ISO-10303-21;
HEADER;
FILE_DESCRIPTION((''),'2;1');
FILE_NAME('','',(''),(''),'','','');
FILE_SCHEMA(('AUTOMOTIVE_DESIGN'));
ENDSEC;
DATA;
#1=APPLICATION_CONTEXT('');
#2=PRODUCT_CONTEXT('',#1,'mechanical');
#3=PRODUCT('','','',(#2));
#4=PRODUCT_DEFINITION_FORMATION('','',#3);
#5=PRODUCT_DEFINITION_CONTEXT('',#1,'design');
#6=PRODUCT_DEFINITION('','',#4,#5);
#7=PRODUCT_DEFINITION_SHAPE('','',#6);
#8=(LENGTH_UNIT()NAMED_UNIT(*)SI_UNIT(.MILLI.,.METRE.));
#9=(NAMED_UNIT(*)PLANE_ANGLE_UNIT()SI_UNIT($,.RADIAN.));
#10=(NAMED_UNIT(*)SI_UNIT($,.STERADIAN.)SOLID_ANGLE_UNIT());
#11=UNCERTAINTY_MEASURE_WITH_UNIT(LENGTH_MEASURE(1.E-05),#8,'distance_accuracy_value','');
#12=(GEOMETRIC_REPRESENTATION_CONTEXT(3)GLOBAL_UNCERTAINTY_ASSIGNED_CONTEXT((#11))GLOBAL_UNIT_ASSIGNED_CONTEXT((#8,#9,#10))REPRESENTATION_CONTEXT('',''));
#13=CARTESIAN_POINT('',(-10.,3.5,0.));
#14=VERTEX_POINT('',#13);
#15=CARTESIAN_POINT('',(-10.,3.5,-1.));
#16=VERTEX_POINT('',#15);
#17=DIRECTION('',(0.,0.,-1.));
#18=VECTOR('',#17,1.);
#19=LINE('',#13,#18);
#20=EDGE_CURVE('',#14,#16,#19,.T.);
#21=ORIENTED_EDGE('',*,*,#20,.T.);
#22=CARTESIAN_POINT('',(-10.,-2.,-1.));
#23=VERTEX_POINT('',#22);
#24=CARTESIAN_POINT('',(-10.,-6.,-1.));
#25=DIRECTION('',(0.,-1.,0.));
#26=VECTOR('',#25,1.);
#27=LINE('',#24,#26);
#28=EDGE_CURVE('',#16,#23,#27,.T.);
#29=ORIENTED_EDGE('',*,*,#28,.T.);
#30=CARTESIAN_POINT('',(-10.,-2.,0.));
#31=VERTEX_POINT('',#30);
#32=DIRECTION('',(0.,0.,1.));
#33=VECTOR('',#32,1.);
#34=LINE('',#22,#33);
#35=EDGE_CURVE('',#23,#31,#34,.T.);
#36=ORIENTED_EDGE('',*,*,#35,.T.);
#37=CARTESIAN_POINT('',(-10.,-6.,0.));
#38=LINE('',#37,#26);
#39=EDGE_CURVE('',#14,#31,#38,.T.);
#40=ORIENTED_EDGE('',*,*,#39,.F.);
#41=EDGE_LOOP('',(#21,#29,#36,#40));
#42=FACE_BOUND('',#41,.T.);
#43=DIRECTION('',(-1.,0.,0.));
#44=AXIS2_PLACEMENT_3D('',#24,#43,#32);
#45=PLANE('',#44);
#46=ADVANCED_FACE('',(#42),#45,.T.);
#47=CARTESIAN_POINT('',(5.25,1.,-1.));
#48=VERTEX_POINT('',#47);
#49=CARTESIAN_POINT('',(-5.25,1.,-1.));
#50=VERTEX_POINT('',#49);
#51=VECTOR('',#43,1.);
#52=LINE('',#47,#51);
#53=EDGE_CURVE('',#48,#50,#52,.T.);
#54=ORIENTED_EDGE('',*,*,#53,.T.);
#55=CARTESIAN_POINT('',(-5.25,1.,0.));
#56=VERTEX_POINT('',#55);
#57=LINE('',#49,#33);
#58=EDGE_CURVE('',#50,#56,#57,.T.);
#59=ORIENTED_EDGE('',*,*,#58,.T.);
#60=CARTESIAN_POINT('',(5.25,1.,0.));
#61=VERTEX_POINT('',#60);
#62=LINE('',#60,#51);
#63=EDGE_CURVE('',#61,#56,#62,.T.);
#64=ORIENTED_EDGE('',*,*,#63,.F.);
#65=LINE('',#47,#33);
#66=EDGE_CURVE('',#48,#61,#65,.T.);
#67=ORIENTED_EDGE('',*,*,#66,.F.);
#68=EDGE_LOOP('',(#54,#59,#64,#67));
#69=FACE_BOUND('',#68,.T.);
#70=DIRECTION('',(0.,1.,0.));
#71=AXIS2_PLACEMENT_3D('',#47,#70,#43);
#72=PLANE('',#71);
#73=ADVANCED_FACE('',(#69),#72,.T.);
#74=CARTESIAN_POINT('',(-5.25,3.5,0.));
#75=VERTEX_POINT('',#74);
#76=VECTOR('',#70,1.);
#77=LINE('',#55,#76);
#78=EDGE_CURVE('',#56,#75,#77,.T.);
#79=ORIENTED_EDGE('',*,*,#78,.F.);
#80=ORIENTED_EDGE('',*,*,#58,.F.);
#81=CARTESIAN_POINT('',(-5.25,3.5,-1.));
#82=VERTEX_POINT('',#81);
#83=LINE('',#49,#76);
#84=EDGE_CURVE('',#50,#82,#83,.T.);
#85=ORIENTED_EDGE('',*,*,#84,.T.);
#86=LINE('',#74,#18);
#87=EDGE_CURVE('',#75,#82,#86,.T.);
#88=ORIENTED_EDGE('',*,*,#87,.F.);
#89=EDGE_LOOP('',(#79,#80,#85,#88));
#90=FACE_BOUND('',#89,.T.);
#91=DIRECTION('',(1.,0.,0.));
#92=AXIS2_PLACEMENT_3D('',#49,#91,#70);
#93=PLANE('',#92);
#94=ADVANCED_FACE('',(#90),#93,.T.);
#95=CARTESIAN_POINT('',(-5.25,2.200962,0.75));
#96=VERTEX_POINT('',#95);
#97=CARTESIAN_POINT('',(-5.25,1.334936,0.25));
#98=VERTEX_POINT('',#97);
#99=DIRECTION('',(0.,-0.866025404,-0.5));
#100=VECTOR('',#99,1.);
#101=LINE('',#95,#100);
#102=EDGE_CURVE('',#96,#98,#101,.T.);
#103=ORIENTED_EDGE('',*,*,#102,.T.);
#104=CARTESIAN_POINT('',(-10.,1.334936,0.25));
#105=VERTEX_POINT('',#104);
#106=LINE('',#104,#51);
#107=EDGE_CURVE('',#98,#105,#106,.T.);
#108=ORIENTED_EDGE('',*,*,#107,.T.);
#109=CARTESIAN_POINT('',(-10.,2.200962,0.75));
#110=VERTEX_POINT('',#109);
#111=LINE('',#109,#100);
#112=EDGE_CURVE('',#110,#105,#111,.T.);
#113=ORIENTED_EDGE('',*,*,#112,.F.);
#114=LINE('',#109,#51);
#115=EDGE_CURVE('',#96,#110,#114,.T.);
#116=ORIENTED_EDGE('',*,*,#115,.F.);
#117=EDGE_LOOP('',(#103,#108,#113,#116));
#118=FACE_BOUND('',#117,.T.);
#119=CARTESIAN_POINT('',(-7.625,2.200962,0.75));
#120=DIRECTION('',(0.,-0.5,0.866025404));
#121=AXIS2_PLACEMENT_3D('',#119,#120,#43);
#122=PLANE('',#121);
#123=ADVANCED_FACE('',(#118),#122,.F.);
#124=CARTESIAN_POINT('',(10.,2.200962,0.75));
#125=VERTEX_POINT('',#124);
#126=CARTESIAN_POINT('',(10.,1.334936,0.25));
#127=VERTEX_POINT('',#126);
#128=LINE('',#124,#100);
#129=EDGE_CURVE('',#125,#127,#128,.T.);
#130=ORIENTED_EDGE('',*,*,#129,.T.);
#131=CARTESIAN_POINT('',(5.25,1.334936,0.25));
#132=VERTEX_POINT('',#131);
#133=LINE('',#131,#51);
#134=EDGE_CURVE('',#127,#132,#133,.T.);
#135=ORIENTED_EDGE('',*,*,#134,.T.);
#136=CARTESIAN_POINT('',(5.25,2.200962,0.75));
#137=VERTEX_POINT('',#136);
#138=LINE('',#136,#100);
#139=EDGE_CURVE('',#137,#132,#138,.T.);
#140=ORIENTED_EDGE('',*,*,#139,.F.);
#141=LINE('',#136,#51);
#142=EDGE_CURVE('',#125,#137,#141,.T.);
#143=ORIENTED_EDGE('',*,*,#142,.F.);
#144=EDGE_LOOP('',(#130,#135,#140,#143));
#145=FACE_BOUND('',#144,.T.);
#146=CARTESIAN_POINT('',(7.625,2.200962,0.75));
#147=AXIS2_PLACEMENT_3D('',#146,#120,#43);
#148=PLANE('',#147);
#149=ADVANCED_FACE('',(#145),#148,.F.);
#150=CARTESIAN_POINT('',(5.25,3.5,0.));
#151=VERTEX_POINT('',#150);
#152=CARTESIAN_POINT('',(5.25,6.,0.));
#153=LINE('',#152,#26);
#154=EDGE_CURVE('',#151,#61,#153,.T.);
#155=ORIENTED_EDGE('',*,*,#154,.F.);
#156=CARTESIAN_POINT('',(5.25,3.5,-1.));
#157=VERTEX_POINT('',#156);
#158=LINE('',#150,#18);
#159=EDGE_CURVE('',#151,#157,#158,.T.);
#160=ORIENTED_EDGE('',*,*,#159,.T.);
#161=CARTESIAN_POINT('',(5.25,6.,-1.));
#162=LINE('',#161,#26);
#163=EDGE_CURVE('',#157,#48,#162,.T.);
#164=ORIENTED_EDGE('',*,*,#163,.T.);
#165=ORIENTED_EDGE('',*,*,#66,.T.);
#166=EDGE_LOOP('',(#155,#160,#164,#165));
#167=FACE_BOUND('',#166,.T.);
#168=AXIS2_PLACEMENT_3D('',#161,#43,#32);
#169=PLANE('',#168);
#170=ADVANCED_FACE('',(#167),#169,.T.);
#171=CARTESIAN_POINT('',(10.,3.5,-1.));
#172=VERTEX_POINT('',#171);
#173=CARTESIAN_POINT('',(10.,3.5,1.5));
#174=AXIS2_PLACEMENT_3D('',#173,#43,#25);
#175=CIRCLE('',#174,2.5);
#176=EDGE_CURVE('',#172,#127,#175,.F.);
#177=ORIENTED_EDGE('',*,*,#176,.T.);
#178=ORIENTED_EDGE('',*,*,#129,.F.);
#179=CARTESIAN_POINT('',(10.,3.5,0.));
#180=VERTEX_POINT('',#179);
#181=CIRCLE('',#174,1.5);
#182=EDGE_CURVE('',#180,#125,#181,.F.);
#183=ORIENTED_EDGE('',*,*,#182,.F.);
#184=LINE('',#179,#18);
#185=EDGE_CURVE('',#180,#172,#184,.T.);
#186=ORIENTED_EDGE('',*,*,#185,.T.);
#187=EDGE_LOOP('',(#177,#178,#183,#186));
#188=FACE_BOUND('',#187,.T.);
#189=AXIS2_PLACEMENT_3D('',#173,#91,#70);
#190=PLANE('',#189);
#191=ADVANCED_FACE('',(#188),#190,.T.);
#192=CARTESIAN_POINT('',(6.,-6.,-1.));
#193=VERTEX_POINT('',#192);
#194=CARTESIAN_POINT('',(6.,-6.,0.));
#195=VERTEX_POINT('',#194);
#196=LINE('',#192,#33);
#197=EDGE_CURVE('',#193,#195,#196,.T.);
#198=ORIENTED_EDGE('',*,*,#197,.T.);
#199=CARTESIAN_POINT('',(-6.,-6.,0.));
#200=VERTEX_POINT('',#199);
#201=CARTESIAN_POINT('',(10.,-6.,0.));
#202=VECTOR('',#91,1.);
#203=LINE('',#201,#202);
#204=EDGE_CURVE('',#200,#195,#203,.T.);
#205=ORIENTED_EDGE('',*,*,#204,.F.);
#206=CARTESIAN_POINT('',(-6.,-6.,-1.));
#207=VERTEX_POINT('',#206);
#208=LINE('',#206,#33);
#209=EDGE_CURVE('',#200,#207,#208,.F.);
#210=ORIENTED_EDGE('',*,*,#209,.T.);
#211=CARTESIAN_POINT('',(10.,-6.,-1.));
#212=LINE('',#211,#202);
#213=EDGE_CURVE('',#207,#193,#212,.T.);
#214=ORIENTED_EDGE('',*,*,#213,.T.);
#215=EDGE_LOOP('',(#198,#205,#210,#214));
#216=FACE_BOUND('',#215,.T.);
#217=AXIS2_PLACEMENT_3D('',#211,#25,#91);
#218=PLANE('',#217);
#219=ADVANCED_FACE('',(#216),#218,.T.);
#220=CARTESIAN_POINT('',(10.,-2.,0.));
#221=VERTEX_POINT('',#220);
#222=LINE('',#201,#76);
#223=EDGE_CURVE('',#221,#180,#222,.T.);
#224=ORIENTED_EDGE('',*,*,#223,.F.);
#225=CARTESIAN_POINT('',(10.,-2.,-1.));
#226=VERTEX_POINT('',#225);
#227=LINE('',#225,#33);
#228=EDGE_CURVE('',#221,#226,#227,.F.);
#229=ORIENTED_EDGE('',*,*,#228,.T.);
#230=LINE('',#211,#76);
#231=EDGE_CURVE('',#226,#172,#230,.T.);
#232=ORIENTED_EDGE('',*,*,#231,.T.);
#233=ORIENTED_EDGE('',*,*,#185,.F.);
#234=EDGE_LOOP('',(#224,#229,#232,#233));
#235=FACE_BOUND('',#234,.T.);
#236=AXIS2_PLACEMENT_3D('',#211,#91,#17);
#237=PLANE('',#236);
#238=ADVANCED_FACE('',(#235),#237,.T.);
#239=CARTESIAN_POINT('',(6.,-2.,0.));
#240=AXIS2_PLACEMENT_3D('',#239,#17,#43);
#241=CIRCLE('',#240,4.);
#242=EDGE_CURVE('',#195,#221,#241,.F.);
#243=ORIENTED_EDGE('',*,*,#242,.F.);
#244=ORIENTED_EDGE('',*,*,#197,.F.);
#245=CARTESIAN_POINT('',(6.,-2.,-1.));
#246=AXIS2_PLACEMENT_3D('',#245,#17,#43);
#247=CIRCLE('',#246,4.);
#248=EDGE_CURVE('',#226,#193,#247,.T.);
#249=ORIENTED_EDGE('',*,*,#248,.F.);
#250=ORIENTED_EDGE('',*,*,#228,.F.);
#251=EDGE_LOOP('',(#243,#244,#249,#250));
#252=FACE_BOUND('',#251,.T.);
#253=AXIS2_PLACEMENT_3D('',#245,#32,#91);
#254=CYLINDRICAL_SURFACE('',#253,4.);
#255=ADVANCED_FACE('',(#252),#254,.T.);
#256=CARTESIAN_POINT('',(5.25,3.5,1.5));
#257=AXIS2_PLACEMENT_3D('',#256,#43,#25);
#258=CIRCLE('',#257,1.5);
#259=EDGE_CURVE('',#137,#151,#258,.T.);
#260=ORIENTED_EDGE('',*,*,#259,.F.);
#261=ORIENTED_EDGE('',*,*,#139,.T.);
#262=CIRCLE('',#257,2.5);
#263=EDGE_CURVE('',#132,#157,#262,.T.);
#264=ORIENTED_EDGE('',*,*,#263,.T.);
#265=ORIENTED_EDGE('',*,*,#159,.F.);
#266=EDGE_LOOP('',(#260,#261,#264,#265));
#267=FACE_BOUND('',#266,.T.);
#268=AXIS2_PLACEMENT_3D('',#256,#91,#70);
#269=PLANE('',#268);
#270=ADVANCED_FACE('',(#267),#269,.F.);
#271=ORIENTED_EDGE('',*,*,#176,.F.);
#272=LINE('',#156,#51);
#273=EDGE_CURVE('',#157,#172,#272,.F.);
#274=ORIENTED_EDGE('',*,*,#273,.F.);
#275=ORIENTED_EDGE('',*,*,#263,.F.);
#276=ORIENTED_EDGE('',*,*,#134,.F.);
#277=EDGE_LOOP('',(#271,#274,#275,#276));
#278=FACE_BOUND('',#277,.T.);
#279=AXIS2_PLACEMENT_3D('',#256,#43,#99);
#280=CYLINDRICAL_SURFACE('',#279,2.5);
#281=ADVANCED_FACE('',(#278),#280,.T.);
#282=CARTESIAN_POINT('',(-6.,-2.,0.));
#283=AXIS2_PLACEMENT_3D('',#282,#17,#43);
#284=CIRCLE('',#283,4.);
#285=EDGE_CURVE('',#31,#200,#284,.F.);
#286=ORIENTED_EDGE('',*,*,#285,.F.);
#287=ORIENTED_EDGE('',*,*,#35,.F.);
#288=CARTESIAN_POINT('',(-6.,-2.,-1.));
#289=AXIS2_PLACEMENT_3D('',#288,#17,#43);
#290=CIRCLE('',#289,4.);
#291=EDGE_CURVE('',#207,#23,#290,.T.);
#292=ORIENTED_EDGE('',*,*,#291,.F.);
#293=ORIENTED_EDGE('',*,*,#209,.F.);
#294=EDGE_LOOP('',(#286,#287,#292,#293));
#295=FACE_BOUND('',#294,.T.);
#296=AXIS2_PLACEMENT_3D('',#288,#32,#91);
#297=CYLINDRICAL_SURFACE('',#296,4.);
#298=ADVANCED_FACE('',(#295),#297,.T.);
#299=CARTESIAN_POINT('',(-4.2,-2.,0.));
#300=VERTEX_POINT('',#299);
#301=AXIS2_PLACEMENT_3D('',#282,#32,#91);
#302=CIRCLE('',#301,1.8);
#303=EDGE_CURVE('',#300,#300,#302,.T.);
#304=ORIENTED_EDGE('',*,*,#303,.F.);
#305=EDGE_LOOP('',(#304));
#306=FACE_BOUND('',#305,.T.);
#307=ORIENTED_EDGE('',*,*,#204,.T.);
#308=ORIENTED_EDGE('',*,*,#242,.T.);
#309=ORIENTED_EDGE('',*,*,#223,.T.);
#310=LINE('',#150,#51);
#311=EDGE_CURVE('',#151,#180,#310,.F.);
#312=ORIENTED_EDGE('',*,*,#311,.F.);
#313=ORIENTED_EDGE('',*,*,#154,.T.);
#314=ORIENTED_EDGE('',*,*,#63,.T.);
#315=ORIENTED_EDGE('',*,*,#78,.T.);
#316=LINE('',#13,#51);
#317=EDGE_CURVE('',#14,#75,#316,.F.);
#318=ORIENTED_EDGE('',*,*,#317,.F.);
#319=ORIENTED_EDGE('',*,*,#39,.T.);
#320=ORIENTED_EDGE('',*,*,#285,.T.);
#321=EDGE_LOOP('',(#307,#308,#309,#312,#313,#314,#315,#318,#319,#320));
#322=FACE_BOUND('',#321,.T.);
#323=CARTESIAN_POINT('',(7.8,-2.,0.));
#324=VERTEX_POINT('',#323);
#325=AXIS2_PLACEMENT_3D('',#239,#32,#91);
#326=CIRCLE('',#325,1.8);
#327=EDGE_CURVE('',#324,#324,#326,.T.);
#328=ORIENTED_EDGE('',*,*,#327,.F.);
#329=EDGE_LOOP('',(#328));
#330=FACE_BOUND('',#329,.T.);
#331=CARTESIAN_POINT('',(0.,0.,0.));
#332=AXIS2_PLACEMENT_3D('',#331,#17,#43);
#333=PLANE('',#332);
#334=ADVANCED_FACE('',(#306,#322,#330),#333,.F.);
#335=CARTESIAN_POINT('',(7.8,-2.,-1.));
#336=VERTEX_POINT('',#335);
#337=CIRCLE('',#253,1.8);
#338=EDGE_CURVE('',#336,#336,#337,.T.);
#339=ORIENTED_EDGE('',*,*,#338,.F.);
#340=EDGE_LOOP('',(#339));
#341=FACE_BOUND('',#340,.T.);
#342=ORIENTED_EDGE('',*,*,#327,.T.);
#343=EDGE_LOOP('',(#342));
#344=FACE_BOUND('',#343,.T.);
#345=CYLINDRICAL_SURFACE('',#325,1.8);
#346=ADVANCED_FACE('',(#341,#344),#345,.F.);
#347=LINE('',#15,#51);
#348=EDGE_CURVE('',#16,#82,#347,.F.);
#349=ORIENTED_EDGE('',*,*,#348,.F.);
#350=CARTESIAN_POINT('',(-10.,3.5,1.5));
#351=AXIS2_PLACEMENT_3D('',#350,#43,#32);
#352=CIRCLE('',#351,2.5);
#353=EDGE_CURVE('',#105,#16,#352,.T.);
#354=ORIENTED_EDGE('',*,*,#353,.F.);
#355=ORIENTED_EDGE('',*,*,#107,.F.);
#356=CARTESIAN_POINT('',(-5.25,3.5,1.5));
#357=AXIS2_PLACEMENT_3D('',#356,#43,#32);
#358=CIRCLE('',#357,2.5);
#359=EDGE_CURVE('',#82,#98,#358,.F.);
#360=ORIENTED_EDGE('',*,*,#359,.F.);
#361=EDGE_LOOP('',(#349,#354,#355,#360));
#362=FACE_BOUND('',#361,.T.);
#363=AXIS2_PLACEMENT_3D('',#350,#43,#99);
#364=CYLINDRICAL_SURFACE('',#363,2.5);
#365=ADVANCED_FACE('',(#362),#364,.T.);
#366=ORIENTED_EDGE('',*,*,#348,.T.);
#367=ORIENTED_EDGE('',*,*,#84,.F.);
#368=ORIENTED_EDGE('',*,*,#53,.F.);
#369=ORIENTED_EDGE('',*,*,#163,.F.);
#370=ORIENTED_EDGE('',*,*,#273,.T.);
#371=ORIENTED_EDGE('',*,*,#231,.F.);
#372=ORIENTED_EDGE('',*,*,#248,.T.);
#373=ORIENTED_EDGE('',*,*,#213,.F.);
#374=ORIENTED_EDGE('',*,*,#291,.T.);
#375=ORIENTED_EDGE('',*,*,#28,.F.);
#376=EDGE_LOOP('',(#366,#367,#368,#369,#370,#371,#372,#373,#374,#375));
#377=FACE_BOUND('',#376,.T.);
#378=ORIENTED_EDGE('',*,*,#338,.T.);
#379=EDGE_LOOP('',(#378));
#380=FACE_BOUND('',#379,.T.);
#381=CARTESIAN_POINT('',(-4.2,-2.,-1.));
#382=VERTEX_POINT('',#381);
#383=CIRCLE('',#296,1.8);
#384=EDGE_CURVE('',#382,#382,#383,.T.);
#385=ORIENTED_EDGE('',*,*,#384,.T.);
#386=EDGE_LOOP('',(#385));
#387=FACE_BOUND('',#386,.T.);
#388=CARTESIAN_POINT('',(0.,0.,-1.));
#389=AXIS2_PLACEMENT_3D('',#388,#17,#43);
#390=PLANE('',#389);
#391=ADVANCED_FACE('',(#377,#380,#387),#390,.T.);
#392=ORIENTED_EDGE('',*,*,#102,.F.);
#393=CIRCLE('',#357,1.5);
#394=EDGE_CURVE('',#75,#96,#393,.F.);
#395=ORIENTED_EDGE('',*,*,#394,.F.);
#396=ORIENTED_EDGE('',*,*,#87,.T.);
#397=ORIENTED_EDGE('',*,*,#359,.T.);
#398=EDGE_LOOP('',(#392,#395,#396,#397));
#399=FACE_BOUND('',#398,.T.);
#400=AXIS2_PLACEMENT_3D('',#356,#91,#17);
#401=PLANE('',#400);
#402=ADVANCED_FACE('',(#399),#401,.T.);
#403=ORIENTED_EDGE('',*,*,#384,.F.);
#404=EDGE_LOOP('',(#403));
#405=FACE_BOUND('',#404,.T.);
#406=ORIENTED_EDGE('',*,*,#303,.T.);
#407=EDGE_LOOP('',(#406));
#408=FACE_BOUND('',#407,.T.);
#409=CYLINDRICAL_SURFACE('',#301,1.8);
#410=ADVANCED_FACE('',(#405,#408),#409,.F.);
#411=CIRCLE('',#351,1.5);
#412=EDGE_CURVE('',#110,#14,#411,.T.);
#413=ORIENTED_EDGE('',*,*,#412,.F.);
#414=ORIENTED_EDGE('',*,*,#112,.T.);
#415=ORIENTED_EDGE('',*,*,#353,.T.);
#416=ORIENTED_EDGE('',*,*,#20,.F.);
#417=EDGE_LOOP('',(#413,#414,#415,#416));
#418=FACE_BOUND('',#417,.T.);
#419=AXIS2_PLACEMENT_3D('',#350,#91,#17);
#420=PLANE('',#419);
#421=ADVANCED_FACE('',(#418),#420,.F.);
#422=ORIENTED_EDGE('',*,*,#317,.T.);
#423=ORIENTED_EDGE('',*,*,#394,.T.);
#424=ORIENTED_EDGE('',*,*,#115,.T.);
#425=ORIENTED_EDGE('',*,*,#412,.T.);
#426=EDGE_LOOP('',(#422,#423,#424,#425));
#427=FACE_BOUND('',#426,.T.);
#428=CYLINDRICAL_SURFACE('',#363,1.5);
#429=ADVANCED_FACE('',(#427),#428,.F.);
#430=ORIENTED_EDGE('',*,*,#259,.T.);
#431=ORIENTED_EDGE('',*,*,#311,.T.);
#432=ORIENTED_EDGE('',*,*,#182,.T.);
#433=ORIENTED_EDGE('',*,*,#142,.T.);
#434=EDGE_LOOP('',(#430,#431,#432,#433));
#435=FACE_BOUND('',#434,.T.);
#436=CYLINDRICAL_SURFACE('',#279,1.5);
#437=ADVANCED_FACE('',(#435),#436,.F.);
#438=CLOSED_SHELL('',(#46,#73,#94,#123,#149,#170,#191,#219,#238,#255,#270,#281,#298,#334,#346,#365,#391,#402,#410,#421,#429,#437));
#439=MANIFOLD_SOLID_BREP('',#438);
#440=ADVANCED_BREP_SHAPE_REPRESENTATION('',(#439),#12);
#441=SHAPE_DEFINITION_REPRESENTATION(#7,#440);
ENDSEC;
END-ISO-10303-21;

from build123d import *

# Parameters (mm, degrees)
SM_BASE_FLANGE_1_DEPTH = 1
OTHER_START            = -10
OTHER_1_DEPTH          = 20
OTHER_1_2_DEPTH        = 4.75
OTHER_START_2          = 5.25
OTHER_1_3_DEPTH        = 4.75
FILLET_1_R             = 4
HOLE_WIZARD_M31_D      = 3.6


# Read off the part's stored shape, not the designer's step: Каемка1
# Sheet-metal steps are written as plain solids
with BuildPart() as part:
    # Sketch 1 → Базовая кромка1 (new body)
    with BuildSketch(Plane.XY):
        Polygon((5.25, 6), (5.25, 1), (-5.25, 1), (-5.25, 6), (-10, 6), (-10, -6), (10, -6), (10, 6), align=None)
    extrude(amount=-SM_BASE_FLANGE_1_DEPTH)

    # Other 1 outline → Other 1 (cut)
    with BuildSketch(Plane.YZ.offset(OTHER_START)):
        with BuildLine():
            Line((6, 0), (5.5, 0))
            ThreePointArc((5.5, 0), (4.618033989, -0.736067978), (3.5, -1))
            Line((3.5, -1), (6, -1))
            Line((6, -1), (6, 0))
        make_face()
    extrude(amount=OTHER_1_DEPTH, mode=Mode.SUBTRACT)

    # Other 1 2 outline → Other 1 2 (add)
    with BuildSketch(Plane.YZ.offset(OTHER_START)):
        with BuildLine():
            Line((1.334936491, 0.25), (2.200961894, 0.75))
            ThreePointArc((2.200961894, 0.75), (4.25, 2.799038106), (3.5, 0))
            Line((3.5, 0), (5.5, 0))
            ThreePointArc((5.5, 0), (3.649788152, 3.995508667), (1.334936491, 0.25))
        make_face()
    extrude(amount=OTHER_1_2_DEPTH)

    # Other 1 3 outline → Other 1 3 (add)
    with BuildSketch(Plane.YZ.offset(OTHER_START_2)):
        with BuildLine():
            Line((1.334936491, 0.25), (2.200961894, 0.75))
            ThreePointArc((2.200961894, 0.75), (4.25, 2.799038106), (3.5, 0))
            Line((3.5, 0), (5.5, 0))
            ThreePointArc((5.5, 0), (3.649788152, 3.995508667), (1.334936491, 0.25))
        make_face()
    extrude(amount=OTHER_1_3_DEPTH)

    # Скругление1
    fillet_1_edges = [part.edges().sort_by_distance(p)[0] for p in [
        (10, -6, -0.5),
        (-10, -6, -0.5),
    ]]
    fillet(fillet_1_edges, radius=FILLET_1_R)

    # Отверстие с зазором M31 (through all)
    with Locations(Plane.XY):
        with Locations((6, -2), (-6, -2)):
            Hole(HOLE_WIZARD_M31_D / 2)


solid = part.part
